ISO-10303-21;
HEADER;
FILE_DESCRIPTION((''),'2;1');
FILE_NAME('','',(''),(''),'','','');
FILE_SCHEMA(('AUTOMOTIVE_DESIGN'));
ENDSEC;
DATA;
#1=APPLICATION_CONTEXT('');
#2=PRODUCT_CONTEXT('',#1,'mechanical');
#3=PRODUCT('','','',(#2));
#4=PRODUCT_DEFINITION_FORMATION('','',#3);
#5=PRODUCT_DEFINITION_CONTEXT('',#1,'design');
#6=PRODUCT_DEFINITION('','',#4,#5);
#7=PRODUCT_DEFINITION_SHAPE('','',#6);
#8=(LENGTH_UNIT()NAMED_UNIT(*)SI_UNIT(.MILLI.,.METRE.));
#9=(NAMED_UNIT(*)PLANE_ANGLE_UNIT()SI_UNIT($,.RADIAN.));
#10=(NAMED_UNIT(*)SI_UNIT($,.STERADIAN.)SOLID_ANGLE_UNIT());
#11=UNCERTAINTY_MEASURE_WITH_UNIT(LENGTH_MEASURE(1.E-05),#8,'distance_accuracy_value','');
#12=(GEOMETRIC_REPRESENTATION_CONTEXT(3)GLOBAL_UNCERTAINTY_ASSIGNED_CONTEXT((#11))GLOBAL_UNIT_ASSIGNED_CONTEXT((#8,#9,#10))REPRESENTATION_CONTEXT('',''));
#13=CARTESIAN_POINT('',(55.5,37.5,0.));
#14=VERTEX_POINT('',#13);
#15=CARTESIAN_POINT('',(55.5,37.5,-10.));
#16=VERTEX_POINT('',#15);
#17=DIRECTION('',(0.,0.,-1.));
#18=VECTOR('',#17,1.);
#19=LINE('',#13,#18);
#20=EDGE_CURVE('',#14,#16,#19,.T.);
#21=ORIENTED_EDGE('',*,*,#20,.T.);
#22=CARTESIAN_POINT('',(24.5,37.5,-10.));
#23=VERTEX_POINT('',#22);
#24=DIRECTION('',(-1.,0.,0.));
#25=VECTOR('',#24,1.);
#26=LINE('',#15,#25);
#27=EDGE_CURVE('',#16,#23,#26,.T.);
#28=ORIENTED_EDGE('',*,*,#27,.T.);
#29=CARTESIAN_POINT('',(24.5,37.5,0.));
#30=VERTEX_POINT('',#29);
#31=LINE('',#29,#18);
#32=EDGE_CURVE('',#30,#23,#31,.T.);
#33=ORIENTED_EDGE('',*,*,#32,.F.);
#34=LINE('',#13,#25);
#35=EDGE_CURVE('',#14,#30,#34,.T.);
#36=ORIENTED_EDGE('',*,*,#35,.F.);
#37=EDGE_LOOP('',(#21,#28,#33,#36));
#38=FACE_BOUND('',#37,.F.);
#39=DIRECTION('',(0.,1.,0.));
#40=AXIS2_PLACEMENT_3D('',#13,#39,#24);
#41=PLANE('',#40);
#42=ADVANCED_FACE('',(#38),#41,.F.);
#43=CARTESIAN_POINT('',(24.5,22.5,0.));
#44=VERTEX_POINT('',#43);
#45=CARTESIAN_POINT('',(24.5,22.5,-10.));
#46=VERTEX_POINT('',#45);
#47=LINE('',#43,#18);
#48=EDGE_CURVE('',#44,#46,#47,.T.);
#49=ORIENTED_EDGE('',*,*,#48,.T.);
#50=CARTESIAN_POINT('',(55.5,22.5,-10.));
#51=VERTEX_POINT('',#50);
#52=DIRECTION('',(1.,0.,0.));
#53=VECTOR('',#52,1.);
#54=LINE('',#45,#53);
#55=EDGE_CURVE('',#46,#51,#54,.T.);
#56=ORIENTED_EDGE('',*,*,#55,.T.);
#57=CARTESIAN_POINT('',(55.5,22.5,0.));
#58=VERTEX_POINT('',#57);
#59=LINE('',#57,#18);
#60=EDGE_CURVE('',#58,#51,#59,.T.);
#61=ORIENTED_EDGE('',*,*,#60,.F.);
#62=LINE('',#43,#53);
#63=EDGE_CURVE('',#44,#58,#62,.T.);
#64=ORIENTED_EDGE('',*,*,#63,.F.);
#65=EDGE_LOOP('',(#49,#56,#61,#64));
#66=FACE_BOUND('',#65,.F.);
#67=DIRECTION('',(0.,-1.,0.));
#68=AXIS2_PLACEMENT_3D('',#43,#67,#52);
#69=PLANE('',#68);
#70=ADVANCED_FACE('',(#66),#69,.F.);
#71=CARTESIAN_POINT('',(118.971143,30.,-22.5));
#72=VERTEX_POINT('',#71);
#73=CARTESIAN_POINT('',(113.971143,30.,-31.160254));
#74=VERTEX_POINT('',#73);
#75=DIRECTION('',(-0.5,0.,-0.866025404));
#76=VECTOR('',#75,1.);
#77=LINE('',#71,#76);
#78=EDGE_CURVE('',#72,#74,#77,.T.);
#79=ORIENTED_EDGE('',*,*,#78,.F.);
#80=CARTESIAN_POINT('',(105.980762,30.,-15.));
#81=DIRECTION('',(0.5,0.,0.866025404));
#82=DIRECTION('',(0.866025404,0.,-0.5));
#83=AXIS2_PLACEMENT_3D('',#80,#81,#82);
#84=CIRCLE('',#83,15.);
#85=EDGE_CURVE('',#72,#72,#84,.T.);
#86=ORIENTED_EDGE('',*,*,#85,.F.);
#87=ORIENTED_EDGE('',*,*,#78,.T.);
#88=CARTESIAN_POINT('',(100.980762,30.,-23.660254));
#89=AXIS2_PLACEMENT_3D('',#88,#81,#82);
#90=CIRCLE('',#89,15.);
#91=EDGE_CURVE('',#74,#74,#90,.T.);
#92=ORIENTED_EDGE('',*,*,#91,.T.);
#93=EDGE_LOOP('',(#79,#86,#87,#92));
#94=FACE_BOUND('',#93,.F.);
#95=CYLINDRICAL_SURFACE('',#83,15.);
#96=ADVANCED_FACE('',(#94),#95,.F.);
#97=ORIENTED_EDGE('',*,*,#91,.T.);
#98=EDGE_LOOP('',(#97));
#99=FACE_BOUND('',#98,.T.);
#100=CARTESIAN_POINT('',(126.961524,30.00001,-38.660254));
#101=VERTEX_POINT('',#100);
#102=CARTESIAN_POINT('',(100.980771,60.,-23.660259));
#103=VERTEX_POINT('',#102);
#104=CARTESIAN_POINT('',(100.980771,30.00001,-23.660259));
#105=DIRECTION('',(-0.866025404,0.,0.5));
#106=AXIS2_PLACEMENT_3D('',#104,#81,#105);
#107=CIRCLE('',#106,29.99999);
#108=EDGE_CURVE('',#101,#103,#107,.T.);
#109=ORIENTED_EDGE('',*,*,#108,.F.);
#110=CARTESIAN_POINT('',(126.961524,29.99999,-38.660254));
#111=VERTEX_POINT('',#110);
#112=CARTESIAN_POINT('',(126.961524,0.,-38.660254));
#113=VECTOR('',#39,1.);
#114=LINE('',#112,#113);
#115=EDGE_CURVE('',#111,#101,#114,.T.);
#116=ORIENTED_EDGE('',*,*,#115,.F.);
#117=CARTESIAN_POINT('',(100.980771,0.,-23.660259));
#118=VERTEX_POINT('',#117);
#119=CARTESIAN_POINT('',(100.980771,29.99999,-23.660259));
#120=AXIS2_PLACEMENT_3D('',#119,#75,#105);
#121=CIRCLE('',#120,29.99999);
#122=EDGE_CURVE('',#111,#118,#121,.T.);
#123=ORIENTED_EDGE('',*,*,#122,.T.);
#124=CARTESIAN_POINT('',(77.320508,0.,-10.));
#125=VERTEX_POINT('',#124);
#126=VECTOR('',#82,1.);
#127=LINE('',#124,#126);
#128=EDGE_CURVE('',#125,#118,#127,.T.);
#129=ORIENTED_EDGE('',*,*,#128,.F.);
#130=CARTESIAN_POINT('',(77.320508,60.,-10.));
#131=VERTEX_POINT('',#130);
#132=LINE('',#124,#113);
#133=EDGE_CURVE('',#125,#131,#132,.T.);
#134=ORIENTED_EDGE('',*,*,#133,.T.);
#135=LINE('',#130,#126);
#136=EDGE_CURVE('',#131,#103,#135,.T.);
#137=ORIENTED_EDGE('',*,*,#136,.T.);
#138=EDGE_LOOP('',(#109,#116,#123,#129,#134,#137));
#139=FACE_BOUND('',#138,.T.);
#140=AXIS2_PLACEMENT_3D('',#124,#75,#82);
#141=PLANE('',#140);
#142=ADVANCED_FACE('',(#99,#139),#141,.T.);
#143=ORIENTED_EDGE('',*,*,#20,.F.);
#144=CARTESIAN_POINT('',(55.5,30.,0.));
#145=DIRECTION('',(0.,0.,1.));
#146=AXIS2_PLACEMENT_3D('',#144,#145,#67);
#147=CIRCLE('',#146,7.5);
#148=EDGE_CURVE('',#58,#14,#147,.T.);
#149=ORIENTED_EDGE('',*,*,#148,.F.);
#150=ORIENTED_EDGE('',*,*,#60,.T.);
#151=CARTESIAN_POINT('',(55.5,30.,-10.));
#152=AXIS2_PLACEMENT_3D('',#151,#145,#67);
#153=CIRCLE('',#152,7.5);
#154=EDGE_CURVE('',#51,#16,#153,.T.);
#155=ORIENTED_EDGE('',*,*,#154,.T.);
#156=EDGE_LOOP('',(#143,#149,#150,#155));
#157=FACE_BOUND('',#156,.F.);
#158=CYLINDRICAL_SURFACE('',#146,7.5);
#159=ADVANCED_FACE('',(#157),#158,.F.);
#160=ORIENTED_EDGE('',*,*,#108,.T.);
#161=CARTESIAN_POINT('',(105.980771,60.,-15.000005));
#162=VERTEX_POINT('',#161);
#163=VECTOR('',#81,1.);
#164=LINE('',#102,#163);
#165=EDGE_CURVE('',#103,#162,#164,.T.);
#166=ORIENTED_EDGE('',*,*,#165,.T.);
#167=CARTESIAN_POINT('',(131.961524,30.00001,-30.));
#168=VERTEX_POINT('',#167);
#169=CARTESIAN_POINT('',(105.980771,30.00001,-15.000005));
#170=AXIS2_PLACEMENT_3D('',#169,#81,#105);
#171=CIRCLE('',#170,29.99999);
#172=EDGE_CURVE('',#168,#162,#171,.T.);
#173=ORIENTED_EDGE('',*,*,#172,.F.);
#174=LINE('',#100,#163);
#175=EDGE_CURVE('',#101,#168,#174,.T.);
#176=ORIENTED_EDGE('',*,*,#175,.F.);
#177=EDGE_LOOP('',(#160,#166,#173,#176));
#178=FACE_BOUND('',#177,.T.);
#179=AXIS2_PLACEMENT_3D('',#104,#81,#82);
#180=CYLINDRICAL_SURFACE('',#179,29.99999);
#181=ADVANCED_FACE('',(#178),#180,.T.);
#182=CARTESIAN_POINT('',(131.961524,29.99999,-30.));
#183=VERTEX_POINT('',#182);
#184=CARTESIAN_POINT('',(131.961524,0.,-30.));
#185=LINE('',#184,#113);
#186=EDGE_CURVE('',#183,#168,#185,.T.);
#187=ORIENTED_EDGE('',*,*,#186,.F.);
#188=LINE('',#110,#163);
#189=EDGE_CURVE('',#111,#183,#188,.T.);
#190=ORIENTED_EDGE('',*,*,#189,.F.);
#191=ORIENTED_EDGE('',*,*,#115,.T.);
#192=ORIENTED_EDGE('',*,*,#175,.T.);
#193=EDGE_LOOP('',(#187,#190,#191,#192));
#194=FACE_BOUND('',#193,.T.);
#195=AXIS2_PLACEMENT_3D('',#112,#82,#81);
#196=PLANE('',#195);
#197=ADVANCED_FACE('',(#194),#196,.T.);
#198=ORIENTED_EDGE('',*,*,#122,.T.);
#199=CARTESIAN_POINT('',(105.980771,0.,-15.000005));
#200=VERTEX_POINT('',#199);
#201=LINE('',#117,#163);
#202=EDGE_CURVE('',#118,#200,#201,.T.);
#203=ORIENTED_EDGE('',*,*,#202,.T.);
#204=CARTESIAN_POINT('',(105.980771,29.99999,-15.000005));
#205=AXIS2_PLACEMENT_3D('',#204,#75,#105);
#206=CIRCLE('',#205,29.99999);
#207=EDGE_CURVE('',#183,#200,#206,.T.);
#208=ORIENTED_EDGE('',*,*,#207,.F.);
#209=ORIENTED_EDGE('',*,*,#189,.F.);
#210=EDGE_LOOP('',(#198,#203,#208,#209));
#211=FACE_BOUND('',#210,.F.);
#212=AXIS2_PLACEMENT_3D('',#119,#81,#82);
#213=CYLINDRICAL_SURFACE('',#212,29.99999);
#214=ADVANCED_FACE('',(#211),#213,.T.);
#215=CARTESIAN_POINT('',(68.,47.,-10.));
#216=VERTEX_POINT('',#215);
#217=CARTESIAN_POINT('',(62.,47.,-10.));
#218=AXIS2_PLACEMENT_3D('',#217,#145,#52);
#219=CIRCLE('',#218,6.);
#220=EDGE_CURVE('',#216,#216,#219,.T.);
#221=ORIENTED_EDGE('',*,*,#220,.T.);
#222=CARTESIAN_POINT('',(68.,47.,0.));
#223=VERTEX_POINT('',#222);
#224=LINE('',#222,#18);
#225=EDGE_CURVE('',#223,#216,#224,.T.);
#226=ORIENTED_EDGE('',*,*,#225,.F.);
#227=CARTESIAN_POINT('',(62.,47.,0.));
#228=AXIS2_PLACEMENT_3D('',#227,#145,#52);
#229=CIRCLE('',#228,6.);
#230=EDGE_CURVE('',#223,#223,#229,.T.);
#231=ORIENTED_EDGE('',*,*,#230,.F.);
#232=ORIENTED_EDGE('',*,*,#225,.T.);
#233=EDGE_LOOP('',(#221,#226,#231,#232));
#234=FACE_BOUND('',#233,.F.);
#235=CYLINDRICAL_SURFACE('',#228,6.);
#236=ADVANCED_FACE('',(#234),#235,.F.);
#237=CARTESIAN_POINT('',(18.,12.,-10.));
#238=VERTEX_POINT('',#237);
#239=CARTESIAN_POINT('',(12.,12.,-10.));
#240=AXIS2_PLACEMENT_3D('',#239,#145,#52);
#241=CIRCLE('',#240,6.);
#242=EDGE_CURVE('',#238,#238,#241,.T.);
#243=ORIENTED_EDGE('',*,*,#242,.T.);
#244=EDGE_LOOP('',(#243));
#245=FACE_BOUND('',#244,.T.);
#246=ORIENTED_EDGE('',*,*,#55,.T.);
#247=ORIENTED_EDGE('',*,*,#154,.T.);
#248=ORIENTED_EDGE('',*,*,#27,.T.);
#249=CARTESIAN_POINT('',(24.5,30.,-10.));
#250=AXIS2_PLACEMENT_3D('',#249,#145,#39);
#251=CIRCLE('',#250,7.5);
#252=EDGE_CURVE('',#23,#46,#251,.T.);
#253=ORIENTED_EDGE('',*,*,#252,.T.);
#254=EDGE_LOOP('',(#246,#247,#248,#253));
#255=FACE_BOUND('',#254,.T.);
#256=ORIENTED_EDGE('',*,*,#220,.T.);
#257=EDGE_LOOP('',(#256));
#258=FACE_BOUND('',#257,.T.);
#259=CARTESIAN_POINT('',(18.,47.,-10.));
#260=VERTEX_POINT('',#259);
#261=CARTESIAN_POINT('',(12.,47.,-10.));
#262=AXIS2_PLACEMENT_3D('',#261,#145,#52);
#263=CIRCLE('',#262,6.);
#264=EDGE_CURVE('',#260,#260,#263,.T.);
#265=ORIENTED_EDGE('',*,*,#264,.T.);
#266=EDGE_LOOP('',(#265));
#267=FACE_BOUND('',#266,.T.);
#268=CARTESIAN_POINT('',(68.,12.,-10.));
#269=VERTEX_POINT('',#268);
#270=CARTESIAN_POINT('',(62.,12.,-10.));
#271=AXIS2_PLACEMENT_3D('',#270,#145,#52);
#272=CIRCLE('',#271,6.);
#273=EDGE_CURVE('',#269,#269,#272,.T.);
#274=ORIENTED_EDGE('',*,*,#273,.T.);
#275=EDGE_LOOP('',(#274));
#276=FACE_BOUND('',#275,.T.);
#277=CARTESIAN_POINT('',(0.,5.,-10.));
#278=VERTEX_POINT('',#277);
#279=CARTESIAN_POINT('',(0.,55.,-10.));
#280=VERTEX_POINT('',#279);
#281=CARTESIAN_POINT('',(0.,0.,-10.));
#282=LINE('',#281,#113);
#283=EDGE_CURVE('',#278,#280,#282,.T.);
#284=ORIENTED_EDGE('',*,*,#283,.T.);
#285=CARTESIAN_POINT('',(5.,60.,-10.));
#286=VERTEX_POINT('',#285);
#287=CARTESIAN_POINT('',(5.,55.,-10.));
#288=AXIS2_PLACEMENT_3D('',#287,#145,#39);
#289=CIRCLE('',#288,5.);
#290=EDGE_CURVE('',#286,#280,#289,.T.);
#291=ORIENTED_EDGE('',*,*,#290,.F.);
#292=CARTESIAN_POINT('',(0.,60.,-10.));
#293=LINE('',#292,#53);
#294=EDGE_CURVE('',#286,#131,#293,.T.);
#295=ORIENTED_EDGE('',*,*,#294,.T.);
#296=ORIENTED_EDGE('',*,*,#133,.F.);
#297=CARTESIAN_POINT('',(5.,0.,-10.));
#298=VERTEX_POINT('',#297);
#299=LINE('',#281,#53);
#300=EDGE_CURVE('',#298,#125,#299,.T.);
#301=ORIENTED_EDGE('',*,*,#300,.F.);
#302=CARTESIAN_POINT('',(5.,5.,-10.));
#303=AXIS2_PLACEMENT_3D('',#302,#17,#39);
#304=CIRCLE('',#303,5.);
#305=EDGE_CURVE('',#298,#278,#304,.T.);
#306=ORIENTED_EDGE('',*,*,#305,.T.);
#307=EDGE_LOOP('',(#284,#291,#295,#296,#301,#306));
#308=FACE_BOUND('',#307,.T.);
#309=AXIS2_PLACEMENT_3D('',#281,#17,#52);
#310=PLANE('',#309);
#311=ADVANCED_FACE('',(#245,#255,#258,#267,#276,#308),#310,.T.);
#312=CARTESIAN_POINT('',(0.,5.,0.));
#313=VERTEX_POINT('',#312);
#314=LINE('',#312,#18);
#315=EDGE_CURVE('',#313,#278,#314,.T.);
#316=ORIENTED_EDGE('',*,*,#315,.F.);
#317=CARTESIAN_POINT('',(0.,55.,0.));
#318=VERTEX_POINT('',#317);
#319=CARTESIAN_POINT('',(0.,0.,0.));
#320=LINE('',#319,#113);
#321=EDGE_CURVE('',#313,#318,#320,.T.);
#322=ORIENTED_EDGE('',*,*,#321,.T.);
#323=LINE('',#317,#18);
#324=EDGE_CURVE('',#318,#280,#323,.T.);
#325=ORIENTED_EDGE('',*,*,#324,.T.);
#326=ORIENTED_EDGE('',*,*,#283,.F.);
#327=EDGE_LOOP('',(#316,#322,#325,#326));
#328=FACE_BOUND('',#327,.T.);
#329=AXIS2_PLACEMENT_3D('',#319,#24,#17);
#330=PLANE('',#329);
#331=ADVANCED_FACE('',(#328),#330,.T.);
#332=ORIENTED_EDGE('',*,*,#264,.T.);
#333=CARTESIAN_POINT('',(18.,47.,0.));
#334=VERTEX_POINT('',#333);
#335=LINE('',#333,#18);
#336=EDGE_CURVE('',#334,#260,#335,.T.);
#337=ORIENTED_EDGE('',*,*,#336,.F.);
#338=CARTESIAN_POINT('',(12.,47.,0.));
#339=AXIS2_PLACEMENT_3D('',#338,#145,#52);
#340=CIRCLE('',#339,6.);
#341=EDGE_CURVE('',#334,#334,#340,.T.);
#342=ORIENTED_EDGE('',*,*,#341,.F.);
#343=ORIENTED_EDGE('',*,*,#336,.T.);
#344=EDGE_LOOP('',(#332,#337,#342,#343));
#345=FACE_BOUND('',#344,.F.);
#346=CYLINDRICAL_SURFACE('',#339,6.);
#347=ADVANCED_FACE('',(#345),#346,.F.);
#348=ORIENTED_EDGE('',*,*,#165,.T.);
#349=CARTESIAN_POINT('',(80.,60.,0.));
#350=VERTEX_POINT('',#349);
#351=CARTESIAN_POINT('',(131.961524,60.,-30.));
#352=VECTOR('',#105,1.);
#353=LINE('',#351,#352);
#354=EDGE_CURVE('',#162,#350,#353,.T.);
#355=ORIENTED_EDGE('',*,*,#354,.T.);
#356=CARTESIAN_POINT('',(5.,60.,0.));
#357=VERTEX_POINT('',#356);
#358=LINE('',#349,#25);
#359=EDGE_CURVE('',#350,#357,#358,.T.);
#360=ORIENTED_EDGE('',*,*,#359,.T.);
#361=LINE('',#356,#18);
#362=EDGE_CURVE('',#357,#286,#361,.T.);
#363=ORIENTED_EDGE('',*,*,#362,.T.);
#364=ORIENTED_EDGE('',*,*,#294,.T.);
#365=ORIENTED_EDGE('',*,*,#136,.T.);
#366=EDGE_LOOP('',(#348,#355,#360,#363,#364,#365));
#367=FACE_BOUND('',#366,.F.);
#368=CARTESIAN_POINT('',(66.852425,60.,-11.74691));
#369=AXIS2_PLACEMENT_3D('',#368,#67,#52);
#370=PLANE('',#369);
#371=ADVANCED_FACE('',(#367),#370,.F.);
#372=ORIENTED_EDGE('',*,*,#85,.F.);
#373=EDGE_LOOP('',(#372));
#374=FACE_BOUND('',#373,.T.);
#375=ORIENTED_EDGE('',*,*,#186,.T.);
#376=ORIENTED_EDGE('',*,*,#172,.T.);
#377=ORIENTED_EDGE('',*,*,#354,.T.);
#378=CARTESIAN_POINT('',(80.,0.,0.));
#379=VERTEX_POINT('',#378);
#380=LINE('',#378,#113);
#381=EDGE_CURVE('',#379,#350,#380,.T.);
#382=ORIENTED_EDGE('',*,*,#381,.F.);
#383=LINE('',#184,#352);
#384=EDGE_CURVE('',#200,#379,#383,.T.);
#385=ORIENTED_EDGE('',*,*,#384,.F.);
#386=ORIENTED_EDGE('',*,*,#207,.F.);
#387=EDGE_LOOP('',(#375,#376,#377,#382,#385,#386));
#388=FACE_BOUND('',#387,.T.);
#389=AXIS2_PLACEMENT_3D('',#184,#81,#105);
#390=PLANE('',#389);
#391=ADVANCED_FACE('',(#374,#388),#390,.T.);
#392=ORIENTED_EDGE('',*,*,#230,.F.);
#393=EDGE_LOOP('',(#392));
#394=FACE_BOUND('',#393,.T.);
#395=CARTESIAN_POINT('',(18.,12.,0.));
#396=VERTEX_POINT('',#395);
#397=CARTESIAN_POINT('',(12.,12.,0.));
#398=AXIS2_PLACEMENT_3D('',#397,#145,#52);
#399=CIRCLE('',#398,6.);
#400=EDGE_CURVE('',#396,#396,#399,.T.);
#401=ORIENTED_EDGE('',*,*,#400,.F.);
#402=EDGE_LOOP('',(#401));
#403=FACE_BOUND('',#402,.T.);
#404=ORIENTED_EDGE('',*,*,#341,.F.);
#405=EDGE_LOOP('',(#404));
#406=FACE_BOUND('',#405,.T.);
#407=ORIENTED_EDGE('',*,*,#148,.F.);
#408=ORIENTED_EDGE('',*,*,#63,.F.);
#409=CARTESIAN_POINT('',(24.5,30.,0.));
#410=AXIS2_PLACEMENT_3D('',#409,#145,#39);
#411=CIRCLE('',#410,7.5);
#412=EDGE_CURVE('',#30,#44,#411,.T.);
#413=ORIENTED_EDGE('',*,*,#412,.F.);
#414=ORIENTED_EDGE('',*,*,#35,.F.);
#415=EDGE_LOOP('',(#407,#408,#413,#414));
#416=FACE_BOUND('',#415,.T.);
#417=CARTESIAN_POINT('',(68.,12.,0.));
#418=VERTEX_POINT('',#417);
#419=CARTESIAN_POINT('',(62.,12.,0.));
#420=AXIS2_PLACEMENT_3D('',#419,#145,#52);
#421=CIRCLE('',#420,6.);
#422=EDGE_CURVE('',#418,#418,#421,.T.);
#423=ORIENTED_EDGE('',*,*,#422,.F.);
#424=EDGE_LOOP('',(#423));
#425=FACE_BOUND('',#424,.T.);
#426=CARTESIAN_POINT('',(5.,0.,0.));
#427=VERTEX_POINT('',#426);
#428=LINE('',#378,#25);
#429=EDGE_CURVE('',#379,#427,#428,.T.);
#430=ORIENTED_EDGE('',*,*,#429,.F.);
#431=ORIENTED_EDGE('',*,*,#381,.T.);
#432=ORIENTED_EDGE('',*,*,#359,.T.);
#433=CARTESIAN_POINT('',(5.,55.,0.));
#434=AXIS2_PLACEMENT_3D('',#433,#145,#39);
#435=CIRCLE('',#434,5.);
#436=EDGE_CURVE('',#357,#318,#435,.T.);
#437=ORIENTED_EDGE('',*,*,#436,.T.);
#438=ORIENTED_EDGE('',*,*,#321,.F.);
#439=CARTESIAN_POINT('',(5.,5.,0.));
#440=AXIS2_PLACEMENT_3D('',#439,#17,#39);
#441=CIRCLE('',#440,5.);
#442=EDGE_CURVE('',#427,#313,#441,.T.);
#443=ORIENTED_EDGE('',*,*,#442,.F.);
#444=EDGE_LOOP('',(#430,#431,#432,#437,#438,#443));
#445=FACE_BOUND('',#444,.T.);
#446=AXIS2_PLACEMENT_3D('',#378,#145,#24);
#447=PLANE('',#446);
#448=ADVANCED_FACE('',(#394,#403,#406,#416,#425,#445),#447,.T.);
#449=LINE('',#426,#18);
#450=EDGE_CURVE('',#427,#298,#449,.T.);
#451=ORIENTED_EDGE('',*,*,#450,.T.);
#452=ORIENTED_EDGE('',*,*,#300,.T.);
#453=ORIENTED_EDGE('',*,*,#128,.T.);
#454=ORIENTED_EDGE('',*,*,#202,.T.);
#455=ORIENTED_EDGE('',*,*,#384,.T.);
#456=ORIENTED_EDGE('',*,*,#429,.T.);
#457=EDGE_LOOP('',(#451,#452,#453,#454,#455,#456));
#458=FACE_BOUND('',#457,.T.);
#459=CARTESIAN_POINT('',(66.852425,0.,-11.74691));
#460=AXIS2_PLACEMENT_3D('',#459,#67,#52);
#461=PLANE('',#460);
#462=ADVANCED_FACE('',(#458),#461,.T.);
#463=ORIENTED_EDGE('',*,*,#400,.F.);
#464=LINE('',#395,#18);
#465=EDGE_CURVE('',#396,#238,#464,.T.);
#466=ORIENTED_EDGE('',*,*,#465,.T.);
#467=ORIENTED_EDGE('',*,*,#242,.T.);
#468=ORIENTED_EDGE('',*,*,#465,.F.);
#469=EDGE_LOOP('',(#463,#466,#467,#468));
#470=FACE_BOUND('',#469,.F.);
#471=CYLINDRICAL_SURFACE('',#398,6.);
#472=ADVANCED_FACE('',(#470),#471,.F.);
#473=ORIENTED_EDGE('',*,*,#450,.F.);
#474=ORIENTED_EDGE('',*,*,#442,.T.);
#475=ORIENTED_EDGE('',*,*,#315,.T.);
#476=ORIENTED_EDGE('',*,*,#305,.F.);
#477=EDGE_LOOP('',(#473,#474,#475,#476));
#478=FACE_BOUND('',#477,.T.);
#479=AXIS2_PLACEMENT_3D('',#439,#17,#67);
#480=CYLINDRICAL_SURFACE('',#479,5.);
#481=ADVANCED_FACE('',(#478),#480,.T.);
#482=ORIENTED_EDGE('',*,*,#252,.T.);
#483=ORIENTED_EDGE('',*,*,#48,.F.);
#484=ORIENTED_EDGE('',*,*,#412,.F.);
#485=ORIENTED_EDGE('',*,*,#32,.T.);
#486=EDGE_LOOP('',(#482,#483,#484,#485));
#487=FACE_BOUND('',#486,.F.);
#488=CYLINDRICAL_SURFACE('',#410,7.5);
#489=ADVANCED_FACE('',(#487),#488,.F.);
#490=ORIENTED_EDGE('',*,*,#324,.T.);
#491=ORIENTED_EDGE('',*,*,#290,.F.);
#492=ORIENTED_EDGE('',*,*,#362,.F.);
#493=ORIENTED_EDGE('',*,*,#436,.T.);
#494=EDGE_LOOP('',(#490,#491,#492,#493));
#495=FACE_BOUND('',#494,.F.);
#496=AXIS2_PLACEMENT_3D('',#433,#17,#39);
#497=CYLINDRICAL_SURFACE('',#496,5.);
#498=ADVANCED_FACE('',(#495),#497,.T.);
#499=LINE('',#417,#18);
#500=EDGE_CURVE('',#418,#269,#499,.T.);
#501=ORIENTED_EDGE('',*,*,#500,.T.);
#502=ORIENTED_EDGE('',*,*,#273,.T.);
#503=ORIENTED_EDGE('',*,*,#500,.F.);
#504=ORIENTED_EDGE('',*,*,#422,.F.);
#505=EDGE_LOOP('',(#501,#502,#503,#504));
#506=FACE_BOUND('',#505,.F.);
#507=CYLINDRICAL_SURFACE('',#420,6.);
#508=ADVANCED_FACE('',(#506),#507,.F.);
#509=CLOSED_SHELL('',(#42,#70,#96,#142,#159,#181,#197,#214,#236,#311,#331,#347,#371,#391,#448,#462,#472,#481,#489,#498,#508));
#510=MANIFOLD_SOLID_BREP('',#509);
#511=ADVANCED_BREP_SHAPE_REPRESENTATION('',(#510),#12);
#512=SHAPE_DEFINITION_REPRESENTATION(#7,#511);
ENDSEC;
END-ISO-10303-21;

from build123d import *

# Parameters (mm, degrees)
F1_DEPTH = 60
F2_R     = 29.99999
F3_R     = 15
F4_DEPTH = 10
F5_R     = 6
F6_DEPTH = 10
F8_DEPTH = 10
F9_R     = 5


# Not quite as in the source:
# - a fillet or chamfer is up to 0.001 mm smaller than in the source, because OpenCascade refuses the exact size


with BuildPart() as f1:
    # F0 (on Front) → F1 (new body)
    with BuildSketch(Plane.XZ):
        Polygon((80, 0), (0, 0), (0, -10), (77.3205080757, -10), (126.9615242271, -38.6602540378), (131.9615242271, -30), align=None)
    extrude(amount=-F1_DEPTH)

    # F2 (radius 30 in the source; OpenCascade refuses exactly that, so slightly less here)
    f2_edges = [f1.edges().sort_by_distance(p)[0] for p in [
        (129.461524, 0, -34.330127),
        (129.461524, 60, -34.330127),
    ]]
    fillet(f2_edges, radius=F2_R)

    # F3 (on face) → F4 (cut, through all)
    with BuildSketch(Plane(origin=(20, 0, 34.6410161514), x_dir=(0.8660254038, 0, -0.5), z_dir=(0.5, 0, 0.8660254038))):
        with Locations((99.2820323028, 30)):
            Circle(F3_R)
    extrude(amount=-F4_DEPTH, mode=Mode.SUBTRACT)

    # F5 (on face) → F6 (cut, through all)
    with BuildSketch(Plane.XY):
        with Locations((12, 12)):
            Circle(F5_R)
        with Locations((12, 47)):
            Circle(F5_R)
        with Locations((62, 12)):
            Circle(F5_R)
        with Locations((62, 47)):
            Circle(F5_R)
    extrude(amount=-F6_DEPTH, mode=Mode.SUBTRACT)

    # F7 (on face) → F8 (cut, through all)
    with BuildSketch(Plane.XY):
        with BuildLine():
            Line((24.5, 22.5), (55.5, 22.5))
            ThreePointArc((55.5, 22.5), (60.8033008589, 24.6966991411), (63, 30))
            ThreePointArc((63, 30), (60.8033008589, 35.3033008589), (55.5, 37.5))
            Line((55.5, 37.5), (24.5, 37.5))
            ThreePointArc((24.5, 37.5), (19.1966991411, 35.3033008589), (17, 30))
            ThreePointArc((17, 30), (19.1966991411, 24.6966991411), (24.5, 22.5))
        make_face()
    extrude(amount=-F8_DEPTH, mode=Mode.SUBTRACT)

    # F9
    f9_edges = [f1.edges().sort_by_distance(p)[0] for p in [
        (0, 0, -5),
        (0, 60, -5),
    ]]
    fillet(f9_edges, radius=F9_R)


solid = f1.part
